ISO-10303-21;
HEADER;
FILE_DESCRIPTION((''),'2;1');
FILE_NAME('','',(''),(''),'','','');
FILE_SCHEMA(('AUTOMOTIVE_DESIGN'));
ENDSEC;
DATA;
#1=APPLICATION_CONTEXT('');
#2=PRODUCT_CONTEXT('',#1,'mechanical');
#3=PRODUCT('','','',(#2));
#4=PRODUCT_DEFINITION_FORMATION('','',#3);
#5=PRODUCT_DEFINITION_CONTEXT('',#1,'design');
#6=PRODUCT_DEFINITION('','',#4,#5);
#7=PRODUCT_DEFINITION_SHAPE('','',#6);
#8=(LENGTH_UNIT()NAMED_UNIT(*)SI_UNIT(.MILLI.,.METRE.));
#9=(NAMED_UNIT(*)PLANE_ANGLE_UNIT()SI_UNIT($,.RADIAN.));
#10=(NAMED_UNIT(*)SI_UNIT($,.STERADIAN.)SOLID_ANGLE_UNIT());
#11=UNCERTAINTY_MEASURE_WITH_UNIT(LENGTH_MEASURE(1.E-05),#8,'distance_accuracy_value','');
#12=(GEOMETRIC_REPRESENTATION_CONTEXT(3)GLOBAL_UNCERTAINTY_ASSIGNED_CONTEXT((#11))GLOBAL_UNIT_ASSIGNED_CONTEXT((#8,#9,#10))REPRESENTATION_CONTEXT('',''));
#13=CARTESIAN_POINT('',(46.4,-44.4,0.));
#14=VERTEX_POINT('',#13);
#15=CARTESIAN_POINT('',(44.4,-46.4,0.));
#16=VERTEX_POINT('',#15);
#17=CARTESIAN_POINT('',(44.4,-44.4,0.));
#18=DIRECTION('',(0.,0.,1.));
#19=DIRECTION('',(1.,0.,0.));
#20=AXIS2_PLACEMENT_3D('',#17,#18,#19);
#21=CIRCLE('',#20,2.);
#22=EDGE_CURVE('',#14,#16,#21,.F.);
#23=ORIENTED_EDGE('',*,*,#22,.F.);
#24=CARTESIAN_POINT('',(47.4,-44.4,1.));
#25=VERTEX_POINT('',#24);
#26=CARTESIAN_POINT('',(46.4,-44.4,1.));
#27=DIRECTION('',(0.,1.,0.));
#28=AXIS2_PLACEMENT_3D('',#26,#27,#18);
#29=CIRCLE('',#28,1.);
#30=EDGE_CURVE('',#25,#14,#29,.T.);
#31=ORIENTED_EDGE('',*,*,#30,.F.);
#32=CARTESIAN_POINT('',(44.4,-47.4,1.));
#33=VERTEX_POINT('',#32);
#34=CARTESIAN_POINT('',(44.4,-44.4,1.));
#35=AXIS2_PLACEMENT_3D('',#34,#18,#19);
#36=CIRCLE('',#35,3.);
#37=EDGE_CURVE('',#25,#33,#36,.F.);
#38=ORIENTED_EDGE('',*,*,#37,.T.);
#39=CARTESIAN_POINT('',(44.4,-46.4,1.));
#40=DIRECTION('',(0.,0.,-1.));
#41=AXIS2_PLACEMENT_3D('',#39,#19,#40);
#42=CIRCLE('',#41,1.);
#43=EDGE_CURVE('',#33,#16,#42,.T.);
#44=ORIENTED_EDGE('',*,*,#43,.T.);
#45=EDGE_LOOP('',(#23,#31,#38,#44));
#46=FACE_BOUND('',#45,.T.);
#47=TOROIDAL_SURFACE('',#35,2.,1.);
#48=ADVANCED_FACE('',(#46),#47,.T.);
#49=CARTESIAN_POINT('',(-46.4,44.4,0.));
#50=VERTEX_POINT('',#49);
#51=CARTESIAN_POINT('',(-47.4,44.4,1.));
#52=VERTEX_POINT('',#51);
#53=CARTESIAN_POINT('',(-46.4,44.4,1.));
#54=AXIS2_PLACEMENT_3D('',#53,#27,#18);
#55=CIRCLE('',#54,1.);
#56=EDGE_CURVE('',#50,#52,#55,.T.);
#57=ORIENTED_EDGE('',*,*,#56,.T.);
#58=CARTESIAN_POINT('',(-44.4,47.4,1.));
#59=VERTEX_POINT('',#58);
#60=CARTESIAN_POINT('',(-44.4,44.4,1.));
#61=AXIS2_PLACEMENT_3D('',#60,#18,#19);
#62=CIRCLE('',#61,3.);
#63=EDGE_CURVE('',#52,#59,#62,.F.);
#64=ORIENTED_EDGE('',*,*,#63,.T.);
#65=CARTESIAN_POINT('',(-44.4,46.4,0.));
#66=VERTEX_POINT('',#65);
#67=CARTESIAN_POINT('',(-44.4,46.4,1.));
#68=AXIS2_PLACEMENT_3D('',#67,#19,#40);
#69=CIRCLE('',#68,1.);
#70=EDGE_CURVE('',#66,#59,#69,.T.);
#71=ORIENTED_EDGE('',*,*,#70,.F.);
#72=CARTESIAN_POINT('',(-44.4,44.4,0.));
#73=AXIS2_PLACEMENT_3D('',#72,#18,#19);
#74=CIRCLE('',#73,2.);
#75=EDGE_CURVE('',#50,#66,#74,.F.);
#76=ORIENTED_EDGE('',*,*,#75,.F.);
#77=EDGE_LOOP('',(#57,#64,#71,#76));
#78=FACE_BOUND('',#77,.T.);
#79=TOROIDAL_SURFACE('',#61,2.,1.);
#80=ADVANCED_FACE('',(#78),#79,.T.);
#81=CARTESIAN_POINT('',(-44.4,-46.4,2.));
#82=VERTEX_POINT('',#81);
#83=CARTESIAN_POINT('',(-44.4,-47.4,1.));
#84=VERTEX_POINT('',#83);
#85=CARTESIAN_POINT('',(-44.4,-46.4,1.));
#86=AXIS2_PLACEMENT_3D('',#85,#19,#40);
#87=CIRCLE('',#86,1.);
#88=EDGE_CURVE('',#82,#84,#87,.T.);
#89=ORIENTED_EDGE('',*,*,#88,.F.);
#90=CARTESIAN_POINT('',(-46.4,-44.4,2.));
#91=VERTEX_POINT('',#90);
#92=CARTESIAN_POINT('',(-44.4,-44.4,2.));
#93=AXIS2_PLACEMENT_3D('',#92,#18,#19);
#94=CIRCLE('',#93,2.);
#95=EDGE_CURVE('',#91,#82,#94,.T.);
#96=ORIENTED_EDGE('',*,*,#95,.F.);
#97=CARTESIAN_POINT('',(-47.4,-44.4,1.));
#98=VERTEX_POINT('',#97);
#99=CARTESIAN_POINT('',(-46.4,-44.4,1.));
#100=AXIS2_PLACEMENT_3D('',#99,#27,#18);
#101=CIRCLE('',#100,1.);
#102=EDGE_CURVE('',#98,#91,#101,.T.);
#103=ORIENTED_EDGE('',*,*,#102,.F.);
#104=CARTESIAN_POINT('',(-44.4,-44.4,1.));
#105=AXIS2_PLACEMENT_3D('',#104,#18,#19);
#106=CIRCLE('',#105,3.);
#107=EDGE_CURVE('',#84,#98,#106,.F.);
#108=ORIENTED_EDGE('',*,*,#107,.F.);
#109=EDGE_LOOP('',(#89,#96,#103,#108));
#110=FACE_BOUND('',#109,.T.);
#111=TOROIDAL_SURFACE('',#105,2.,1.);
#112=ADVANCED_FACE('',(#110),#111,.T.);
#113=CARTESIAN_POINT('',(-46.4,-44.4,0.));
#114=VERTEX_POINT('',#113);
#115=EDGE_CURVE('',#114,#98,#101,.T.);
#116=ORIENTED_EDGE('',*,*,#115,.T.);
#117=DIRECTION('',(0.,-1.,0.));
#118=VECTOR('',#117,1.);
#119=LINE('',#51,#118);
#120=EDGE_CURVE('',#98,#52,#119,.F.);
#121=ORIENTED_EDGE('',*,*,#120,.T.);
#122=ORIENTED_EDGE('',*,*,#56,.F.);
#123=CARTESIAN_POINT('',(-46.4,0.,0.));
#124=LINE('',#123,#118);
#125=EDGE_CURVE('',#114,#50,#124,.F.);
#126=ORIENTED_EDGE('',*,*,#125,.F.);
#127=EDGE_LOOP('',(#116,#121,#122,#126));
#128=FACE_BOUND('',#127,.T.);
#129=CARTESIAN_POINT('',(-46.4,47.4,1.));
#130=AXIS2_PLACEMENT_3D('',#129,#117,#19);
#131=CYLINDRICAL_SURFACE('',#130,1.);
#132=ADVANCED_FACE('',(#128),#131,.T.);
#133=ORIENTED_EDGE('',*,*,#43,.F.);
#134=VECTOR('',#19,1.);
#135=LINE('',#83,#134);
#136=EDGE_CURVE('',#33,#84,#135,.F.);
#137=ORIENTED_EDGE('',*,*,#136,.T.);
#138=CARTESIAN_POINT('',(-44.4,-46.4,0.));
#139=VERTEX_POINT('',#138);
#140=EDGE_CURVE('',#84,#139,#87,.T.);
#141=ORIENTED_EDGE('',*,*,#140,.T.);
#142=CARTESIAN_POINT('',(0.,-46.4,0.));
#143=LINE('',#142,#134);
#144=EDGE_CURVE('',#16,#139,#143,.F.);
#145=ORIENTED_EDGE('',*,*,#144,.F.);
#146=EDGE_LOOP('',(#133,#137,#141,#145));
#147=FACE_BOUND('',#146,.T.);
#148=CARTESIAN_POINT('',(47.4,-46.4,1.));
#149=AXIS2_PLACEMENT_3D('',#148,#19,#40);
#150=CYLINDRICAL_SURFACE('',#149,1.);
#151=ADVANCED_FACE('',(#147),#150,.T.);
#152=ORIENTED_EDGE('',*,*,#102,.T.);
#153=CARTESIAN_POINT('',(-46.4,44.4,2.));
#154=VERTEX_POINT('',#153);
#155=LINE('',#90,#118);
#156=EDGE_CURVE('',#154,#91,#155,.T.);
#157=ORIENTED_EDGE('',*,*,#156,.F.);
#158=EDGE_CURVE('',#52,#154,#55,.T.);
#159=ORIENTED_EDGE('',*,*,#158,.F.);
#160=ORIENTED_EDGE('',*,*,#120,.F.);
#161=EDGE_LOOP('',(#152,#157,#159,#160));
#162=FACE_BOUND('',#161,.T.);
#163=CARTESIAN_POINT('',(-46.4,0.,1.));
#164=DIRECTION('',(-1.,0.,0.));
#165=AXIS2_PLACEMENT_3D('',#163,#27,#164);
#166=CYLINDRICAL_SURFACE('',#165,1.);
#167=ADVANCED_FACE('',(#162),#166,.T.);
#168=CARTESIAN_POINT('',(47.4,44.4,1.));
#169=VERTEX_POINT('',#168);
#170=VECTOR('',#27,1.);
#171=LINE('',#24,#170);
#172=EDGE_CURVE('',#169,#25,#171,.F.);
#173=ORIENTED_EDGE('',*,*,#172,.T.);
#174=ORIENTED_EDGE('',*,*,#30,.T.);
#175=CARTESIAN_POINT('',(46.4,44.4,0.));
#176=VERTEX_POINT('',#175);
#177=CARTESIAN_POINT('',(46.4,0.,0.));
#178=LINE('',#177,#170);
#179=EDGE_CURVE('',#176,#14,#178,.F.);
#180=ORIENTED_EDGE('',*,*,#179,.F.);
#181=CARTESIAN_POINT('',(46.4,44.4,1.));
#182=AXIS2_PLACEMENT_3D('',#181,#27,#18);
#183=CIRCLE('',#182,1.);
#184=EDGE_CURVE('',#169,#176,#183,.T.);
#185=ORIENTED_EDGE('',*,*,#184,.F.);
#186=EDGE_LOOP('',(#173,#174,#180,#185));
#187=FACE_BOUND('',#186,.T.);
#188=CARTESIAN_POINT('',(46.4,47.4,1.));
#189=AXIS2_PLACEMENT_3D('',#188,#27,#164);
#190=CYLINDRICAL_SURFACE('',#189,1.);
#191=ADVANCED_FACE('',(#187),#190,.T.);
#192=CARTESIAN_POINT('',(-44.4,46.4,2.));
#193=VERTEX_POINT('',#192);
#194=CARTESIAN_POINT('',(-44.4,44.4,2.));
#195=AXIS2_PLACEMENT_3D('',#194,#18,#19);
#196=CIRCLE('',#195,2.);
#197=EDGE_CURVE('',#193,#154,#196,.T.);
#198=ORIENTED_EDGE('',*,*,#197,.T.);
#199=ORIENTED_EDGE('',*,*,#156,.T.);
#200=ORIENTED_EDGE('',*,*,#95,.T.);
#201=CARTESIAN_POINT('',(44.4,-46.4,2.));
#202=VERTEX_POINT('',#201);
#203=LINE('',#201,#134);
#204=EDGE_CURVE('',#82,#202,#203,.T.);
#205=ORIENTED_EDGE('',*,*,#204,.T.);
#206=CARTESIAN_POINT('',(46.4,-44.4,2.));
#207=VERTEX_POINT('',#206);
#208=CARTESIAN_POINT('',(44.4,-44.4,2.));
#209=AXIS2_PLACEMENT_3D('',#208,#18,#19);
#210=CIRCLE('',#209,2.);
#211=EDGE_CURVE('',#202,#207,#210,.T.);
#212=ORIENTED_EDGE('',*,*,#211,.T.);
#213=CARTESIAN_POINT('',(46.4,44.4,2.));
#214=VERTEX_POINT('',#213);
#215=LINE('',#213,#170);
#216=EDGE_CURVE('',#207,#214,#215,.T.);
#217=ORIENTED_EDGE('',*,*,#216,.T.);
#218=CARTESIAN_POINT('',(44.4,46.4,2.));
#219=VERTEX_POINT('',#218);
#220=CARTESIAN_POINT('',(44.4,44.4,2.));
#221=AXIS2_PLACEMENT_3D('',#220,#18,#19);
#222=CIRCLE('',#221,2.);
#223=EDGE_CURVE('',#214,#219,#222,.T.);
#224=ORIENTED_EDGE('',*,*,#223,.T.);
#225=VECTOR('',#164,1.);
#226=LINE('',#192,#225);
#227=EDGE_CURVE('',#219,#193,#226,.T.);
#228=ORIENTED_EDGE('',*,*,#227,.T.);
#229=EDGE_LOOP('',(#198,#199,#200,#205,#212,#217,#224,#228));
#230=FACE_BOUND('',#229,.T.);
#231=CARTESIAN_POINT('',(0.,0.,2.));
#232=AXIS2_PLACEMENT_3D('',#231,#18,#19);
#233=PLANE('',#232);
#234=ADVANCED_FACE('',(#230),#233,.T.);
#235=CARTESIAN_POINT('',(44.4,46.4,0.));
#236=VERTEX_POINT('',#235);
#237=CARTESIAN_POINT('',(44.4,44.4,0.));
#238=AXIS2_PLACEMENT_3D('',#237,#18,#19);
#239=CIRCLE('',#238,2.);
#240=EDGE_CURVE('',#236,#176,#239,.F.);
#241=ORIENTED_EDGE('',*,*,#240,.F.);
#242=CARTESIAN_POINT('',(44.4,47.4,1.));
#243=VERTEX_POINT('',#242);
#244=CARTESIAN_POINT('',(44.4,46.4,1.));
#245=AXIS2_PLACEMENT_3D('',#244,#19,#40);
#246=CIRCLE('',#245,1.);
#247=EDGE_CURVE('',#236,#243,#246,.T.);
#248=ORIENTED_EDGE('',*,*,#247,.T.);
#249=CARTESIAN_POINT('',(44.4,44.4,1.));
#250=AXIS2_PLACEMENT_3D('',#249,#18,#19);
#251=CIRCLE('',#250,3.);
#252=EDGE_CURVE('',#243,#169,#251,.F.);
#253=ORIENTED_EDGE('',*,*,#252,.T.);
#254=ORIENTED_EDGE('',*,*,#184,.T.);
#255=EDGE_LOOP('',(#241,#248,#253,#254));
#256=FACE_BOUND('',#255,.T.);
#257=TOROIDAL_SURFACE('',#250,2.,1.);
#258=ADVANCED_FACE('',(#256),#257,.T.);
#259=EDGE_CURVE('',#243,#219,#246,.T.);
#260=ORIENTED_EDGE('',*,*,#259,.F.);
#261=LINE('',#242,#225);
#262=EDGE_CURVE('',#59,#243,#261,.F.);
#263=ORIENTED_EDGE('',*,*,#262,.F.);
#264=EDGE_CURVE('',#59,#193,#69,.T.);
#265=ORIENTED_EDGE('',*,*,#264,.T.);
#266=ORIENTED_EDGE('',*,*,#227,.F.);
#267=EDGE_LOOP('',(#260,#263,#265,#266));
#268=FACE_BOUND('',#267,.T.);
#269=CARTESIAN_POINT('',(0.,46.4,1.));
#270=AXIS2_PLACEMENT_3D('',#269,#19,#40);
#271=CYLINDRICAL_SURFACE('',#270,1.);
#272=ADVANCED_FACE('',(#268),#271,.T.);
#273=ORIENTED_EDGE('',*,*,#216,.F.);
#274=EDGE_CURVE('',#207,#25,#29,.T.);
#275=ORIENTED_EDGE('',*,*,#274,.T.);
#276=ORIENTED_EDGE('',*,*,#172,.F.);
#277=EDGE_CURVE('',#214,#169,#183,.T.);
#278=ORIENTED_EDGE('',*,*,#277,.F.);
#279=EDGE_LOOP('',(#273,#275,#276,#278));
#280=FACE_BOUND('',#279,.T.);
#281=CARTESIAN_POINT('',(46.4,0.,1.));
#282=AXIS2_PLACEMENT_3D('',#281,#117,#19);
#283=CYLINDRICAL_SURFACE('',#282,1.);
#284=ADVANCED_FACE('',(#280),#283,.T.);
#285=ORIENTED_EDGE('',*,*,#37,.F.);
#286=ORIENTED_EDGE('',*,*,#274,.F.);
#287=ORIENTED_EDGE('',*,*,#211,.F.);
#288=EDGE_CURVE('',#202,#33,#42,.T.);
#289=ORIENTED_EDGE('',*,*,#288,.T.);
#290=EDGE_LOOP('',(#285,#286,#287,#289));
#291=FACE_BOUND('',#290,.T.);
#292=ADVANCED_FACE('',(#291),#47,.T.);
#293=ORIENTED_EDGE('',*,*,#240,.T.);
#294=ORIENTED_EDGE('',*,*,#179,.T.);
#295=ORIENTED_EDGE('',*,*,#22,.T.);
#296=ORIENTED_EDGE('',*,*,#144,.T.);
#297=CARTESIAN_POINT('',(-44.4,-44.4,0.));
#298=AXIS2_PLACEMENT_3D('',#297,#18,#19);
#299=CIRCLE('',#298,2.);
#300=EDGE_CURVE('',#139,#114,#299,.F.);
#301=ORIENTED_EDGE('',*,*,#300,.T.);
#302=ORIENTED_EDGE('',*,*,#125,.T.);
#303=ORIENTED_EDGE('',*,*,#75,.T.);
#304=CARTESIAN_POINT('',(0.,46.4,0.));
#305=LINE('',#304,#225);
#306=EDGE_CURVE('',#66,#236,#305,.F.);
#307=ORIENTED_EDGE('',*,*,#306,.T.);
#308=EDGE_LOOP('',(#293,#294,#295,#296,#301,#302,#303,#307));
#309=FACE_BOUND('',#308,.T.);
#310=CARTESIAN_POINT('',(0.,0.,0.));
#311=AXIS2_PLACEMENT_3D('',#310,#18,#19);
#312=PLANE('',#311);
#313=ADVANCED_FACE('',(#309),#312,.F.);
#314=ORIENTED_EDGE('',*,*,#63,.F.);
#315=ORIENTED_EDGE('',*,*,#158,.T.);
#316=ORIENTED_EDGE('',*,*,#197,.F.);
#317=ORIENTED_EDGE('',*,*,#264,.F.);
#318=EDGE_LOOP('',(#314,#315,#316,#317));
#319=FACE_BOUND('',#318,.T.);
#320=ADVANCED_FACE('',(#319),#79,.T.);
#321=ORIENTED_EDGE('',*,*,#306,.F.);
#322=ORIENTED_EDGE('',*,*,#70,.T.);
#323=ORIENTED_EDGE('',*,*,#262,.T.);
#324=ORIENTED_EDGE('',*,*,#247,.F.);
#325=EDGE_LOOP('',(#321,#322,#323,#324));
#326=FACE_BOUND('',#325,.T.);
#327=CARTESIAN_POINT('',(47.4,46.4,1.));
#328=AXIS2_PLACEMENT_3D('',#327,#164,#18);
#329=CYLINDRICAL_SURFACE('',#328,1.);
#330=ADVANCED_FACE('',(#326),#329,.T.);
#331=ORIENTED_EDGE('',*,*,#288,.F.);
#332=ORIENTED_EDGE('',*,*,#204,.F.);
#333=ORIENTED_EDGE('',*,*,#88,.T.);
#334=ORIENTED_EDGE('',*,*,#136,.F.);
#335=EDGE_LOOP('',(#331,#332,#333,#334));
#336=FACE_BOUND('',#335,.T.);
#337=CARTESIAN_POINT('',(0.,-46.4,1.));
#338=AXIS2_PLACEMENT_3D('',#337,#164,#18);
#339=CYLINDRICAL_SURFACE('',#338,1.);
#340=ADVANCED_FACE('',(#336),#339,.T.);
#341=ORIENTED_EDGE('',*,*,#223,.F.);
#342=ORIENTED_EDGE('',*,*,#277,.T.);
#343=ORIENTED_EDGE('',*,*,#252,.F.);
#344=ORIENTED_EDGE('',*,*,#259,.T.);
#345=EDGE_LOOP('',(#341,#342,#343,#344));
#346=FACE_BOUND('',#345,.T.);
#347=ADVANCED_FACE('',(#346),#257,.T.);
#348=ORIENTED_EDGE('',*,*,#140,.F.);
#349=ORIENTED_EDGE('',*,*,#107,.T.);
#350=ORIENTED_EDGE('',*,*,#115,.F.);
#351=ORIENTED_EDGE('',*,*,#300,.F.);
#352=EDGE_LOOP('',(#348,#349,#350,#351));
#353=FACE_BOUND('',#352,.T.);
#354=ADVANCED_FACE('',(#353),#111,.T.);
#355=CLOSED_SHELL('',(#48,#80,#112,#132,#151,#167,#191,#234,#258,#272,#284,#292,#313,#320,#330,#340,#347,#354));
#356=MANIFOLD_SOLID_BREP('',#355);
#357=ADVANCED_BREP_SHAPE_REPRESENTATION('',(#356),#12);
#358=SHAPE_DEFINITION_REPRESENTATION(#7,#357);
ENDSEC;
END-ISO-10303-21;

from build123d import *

# Parameters (mm, degrees)
SKETCH1_W           = 94.8
SKETCH1_H           = 94.8
BOSS_EXTRUDE1_DEPTH = 2
FILLET1_R           = 3
FILLET2_R           = 1


with BuildPart() as part:
    # Sketch1 → Boss-Extrude1 (new body)
    with BuildSketch(Plane(origin=(0, 0, 0), x_dir=(0, 1, 0), z_dir=(0, 0, 1))):
        Rectangle(SKETCH1_W, SKETCH1_H)
    extrude(amount=BOSS_EXTRUDE1_DEPTH)

    # Fillet1
    fillet1_edges = [part.edges().sort_by_distance(p)[0] for p in [
        (-47.4, -47.4, 1),
        (-47.4, 47.4, 1),
        (47.4, 47.4, 1),
        (47.4, -47.4, 1),
    ]]
    fillet(fillet1_edges, radius=FILLET1_R)

    # Fillet2
    fillet2_edges = [part.edges().sort_by_distance(p)[0] for p in [
        (46.521320344, 46.521320344, 0),
        (47.4, 0, 0),
        (46.521320344, -46.521320344, 0),
        (0, -47.4, 0),
        (-46.521320344, -46.521320344, 0),
        (-47.4, 0, 0),
        (-46.521320344, 46.521320344, 0),
        (46.521320344, 46.521320344, 2),
        (47.4, 0, 2),
        (46.521320344, -46.521320344, 2),
        (0, -47.4, 2),
        (-46.521320344, -46.521320344, 2),
        (-47.4, 0, 2),
        (-46.521320344, 46.521320344, 2),
        (0, 47.4, 2),
        (0, 47.4, 0),
    ]]
    fillet(fillet2_edges, radius=FILLET2_R - 0.0001)  # a hair under: the kernel refuses the full size


solid = part.part
